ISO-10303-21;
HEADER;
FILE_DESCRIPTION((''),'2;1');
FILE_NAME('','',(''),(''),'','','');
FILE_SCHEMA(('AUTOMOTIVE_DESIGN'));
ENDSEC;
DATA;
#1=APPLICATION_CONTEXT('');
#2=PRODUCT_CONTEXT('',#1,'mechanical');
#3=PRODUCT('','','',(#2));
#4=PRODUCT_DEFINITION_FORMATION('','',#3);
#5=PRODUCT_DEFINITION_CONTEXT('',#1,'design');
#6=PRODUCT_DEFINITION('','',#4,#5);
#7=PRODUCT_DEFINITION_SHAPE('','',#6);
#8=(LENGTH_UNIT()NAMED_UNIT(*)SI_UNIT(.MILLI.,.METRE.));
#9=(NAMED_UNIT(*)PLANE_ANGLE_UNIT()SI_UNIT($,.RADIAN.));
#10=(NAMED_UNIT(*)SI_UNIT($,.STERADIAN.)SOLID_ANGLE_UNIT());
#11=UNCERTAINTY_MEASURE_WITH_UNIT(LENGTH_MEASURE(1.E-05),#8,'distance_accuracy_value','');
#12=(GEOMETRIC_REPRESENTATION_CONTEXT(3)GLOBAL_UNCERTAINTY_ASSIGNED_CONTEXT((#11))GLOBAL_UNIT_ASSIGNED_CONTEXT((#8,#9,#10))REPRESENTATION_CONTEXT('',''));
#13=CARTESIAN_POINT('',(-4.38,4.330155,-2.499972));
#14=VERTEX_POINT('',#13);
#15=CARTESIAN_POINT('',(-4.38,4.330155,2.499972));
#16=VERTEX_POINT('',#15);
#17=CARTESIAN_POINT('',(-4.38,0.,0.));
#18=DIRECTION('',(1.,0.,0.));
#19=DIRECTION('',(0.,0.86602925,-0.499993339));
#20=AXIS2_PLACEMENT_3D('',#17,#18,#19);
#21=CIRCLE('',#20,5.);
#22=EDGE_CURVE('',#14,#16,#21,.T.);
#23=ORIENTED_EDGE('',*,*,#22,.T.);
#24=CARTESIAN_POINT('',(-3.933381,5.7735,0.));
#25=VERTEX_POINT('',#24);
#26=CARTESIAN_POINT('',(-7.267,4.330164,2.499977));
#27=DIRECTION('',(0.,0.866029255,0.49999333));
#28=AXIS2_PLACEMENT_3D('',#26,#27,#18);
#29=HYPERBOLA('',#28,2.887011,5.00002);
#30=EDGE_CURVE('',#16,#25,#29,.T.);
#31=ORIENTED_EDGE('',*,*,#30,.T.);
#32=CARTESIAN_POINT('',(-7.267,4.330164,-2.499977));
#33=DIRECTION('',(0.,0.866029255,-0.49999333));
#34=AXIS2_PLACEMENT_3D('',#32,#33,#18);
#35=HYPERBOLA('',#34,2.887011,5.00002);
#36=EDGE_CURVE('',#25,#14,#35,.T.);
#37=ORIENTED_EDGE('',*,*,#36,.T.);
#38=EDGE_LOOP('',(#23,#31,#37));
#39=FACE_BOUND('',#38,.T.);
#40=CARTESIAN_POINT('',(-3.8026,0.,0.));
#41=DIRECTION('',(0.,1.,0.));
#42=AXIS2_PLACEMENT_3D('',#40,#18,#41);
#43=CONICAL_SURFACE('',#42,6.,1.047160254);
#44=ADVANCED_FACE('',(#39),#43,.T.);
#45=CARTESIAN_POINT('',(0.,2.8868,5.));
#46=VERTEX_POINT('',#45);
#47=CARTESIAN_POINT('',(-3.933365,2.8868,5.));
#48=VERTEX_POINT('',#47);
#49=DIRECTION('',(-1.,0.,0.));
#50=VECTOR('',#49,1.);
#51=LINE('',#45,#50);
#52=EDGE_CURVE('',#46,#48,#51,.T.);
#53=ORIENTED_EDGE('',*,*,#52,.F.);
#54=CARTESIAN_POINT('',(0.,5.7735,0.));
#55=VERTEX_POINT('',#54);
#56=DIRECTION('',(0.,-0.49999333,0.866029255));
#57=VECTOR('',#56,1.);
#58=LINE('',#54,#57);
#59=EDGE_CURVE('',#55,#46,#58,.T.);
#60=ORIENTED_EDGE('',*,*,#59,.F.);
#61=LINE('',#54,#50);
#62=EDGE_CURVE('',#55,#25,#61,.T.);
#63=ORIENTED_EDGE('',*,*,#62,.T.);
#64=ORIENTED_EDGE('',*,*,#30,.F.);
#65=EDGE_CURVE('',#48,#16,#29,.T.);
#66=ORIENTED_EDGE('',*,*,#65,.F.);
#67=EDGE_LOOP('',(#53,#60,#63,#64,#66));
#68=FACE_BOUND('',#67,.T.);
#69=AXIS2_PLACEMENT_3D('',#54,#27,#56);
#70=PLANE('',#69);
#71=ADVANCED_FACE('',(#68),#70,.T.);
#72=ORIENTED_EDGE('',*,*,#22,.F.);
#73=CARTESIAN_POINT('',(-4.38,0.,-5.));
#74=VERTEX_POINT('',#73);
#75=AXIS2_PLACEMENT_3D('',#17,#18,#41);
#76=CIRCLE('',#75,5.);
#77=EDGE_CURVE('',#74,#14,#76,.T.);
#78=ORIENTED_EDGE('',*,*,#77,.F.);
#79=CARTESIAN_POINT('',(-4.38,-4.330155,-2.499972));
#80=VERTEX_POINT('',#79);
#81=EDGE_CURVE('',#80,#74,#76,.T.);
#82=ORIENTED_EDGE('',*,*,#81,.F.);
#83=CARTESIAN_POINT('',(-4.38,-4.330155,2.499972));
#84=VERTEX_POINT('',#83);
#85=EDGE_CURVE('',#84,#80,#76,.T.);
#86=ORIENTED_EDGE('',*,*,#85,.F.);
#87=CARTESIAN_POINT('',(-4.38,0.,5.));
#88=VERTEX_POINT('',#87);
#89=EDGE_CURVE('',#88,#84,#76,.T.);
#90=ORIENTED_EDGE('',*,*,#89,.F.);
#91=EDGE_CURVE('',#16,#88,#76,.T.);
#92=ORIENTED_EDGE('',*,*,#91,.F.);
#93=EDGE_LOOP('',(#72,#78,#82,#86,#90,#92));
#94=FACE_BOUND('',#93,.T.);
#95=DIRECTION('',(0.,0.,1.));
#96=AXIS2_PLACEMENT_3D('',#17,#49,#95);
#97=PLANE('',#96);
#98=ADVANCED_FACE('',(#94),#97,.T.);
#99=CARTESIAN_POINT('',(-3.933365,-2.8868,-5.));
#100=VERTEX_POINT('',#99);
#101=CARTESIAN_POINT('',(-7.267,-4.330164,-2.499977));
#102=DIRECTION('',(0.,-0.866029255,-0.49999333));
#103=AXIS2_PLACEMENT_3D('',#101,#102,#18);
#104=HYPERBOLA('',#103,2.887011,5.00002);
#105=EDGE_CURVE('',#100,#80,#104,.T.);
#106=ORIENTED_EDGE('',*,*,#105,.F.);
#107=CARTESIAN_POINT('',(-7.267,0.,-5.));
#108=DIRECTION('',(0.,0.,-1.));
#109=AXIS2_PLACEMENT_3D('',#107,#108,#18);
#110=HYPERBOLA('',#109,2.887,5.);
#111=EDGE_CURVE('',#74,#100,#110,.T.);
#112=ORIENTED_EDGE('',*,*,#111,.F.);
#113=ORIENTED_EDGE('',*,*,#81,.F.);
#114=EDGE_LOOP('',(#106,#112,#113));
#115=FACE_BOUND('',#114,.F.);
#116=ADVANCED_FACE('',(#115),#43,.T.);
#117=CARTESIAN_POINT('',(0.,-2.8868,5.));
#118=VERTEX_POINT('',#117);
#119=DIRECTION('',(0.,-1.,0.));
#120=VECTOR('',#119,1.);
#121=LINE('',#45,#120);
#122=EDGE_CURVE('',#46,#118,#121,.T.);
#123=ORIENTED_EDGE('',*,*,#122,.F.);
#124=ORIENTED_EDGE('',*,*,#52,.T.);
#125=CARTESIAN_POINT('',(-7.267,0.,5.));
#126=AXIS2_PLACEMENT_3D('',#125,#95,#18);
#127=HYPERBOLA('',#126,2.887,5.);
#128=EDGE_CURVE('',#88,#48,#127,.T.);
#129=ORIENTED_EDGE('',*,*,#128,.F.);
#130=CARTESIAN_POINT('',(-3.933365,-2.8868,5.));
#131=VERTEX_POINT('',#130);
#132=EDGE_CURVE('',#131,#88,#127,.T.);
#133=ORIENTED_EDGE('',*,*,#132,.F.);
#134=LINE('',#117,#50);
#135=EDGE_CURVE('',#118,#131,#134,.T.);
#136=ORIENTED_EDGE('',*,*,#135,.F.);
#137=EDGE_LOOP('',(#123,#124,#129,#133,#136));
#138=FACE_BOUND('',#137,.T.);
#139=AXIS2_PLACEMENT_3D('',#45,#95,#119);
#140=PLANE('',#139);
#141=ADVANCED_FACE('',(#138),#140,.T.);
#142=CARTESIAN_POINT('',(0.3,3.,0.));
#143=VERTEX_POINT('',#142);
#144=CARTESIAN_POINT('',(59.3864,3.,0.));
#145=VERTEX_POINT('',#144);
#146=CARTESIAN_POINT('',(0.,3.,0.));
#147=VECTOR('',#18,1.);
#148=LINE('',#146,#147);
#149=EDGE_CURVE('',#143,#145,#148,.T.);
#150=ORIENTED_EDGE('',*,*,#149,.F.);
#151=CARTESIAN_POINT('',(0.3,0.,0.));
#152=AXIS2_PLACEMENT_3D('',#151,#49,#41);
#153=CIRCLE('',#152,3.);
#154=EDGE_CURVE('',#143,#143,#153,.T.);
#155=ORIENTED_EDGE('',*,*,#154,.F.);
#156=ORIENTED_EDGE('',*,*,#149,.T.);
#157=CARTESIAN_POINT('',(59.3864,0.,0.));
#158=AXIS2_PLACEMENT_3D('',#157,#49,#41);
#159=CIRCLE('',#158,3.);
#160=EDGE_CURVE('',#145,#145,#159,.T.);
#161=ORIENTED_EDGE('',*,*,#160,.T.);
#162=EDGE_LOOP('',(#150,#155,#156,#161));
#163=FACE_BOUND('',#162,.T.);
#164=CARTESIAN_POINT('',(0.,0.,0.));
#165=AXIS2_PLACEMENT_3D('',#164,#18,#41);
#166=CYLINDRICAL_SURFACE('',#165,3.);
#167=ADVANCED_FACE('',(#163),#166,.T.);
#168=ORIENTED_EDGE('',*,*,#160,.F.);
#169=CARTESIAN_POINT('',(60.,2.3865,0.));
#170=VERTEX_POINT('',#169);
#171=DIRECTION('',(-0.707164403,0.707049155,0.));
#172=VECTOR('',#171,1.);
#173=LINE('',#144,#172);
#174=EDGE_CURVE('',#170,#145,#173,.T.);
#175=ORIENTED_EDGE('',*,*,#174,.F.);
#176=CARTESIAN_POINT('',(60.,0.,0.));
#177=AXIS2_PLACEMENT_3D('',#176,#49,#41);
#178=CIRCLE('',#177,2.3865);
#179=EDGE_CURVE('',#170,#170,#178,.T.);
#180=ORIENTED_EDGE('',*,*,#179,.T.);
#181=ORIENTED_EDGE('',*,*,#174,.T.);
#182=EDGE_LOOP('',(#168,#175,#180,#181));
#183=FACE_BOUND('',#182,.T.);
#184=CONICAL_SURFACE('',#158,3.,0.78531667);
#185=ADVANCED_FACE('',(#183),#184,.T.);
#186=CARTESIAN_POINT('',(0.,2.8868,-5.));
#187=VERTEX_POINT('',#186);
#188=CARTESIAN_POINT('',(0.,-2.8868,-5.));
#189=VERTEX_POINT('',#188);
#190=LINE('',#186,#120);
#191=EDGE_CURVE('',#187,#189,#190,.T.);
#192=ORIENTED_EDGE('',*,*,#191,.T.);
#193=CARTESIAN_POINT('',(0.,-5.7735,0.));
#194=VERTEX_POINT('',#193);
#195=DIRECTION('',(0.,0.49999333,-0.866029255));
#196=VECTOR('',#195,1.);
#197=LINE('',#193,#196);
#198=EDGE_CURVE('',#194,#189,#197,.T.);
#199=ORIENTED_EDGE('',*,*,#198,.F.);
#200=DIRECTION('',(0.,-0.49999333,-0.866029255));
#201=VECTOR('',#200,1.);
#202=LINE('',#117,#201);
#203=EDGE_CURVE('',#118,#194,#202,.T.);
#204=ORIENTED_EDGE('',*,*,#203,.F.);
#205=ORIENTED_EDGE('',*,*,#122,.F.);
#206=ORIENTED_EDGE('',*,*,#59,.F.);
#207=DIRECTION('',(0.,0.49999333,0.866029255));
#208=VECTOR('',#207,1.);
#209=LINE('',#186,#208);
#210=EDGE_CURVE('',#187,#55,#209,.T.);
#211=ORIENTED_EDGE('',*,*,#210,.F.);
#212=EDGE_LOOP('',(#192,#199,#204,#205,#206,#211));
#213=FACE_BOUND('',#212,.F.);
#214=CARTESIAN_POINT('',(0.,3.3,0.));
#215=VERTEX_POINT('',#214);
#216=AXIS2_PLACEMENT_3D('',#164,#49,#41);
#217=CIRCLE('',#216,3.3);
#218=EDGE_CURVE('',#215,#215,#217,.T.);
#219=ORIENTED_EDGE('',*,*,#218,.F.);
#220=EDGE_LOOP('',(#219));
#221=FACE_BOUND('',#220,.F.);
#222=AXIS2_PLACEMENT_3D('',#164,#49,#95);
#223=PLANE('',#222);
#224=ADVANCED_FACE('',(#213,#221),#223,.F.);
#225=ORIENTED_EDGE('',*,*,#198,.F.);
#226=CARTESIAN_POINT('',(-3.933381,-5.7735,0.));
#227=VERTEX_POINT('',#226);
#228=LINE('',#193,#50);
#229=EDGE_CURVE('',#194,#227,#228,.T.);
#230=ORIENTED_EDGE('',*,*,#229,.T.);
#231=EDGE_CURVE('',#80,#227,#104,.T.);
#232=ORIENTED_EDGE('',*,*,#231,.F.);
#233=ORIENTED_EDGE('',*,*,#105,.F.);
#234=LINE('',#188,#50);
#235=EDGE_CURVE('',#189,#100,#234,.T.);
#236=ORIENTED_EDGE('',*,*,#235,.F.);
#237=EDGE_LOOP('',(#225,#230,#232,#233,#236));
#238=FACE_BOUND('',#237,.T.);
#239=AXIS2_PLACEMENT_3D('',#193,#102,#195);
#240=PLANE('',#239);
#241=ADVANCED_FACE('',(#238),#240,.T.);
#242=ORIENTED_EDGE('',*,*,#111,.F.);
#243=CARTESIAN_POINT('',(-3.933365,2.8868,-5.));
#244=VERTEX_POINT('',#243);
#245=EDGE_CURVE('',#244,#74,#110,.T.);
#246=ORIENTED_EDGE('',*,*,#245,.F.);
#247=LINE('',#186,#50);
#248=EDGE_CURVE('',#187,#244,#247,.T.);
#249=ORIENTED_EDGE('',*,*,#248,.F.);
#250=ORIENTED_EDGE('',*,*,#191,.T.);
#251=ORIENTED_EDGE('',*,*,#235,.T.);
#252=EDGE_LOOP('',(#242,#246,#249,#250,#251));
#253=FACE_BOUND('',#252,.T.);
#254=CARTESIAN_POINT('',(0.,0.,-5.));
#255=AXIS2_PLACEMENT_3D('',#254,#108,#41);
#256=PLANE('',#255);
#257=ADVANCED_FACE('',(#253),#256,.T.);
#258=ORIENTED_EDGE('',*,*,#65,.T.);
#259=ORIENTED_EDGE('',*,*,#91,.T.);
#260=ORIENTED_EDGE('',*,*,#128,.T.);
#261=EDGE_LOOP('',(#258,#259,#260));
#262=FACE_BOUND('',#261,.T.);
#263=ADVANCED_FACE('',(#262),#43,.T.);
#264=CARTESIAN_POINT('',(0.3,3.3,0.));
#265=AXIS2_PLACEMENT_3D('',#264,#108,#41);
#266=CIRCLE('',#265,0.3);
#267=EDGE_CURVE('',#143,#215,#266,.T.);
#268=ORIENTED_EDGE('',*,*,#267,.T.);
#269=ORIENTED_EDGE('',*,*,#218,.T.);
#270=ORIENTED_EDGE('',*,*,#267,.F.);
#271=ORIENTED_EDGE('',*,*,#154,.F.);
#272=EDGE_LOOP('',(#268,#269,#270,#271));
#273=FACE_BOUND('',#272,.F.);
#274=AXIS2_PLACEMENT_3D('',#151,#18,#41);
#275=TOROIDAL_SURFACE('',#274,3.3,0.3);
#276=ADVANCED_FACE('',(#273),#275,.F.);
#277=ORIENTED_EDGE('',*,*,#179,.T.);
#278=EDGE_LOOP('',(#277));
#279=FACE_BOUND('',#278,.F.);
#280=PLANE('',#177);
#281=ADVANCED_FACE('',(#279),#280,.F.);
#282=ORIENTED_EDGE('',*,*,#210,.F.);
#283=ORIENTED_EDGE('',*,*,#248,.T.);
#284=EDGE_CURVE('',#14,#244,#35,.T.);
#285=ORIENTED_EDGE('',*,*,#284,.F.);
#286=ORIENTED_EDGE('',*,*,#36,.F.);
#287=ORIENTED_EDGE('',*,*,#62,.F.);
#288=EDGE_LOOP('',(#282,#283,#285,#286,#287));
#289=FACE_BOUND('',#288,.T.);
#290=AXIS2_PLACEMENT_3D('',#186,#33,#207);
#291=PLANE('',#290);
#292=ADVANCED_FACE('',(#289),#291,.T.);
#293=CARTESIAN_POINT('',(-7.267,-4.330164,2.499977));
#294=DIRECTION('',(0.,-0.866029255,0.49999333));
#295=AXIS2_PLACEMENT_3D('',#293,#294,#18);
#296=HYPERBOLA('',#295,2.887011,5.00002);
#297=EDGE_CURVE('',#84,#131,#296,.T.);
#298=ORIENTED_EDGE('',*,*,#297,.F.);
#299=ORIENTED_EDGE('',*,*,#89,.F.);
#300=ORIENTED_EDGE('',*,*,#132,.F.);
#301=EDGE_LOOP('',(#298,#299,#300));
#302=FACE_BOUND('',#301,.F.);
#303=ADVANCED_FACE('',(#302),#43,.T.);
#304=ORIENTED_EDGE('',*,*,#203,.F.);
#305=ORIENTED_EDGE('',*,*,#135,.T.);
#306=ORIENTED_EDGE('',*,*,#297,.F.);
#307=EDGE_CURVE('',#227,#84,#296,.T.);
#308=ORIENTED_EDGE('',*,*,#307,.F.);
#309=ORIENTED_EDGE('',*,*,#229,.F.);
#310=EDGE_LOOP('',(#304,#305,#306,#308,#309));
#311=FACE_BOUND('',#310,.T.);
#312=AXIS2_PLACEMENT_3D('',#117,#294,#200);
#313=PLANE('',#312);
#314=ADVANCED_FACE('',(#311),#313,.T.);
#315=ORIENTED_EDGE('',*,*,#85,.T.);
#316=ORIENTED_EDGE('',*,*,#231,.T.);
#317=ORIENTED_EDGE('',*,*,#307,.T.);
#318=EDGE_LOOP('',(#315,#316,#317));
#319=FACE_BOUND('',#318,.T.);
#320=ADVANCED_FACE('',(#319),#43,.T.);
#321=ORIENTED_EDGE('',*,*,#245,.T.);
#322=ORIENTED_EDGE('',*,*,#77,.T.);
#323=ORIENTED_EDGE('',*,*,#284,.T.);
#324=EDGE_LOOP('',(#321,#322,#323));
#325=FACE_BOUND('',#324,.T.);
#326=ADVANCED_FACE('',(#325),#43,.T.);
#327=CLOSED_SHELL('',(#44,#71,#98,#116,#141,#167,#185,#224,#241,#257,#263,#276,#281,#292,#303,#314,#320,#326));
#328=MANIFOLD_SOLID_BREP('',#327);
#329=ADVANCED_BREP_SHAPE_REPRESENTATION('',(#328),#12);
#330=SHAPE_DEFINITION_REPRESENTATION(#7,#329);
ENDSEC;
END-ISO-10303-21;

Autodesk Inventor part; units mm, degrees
ref_plane "YZ Plane" through (0, 0, 0) normal (1, 0, 0) x (0, 1, 0)
ref_plane "XZ Plane" through (0, 0, 0) normal (0, 1, 0) x (-1, 0, 0)
sketch "Szkic1" plane through (0, 0, 0) normal (0, 0, 1) x (1, 0, 0)
  line L0 (0, 3) -> (60, 3)
  line L1 (60, 3) -> (60, 0)
  line L2 (60, 0) -> (0, 0)
  line L3 (-12, 0) -> (72, 0) projected
  line L4 (0, -0.6) -> (0, 3.6) projected
  line L5 (0, 3) -> (0, 0)
  dimension "d2" = 6
  dimension "d59" = 60
revolve "Bryła" add sketch "Szkic1" angle 360 about axis through (60, 0, 0) along (-1, 0, 0)
sketch "Szkic2" plane through (0, 0, 0) normal (-1, 0, 0) x (0, 0, 1)
  line L0 (0, 5.7735) -> (5, 2.8868)
  line L1 (5, 2.8868) -> (5, -2.8868)
  line L2 (5, -2.8868) -> (0, -5.7735)
  line L3 (0, -5.7735) -> (-5, -2.8868)
  line L4 (-5, -2.8868) -> (-5, 2.8868)
  line L5 (-5, 2.8868) -> (0, 5.7735)
  line L6 (-7, 0) -> (7, 0) projected
  line L7 (0, 8.0829) -> (0, -8.0829) projected
  point P0 (0, 0)
  point P1 (0, 0)
  dimension "d11" = 10
extrude "Głowica" add sketch "Szkic2" along normal blind 4.38
sketch "Szkic4" plane through (0, 0, 0) normal (0, 0, 1) x (1, 0, 0)
  line L0 (-3.8026, 6) -> (-4.38, 5)
  line L1 (-1.1, 0) -> (-0.234, 0)
  line L2 (-5.2092, 0) -> (0.5952, 0) projected
  line L3 (-4.38, 6) -> (-3.8026, 6)
  line L4 (-4.38, 5) -> (-4.38, 6)
  line L5 (0, 7.2) -> (0, -1.2) projected
  dimension "d65" = 10
  dimension "d67" = 30
  dimension "d68" = 12
  dimension "d69" = 4.38
revolve "Faza1" cut sketch "Szkic4" angle 360 about axis through (-1.1, 0, 0) along (1, 0, 0)
thread "Gwint" size "M6x1" class "6g" standard "ISO Metric profile" length 18
chamfer "Faza2" distance 0.6135 distance2 0.6136 1 edges at (60, -3, 0) measured on face at (60, 0.0929, 0.8807)
fillet "Fillet" radius 0.3 1 edges at (0, -3, 0)
ref_plane "Work Plane1" through (1.525, 0, 0) normal (0, 0, 1) x (1, 0, 0)
equation "\"d71\" = RR1"
equation "\"d11\" = SW"
equation "\"d3\" = KOH"
equation "\"d15\" = GEL"
equation "\"d6\" = -0.5 * SPD + 0.5 * GD"
equation "\"d2\" = GD"
equation "\"d59\" = NLG"
equation "\"d65\" = SW"
equation "\"d67\" = ANG1"
equation "\"d68\" = 1.2 * SW"
equation "\"d69\" = KOH"
equation "\"NLG\" = 60"
equation "\"GD\" = NND"
equation "\"BDM\" = NND"
equation "\"KOH\" = 4.38"
equation "\"GEL\" = 18"
equation "\"SW\" = 10"
equation "\"SPD\" = NND - 1.2269 * PTC"
equation "\"SD2\" = NND"
equation "\"SD\" = 0"
equation "\"ANG1\" = 30deg"
equation "\"GAL\" = 0.61345 * PTC"
equation "\"GUL\" = 0.61345 * PTC"
equation "\"RR\" = 0.1"
equation "\"RR1\" = 0.3"
equation "\"GD1\" = THREADDIA - 1.2269 * PTC"
equation "\"THREADDIA\" = 6"
equation "\"TOA\" = 30deg"
equation "\"PTC\" = 1"
equation "\"KOH1\" = 2.8"
equation "\"NND\" = 6"
equation "\"E0\" = 1.155 * SW"
properties part number "ANSI B18.2.3.5M - M6 x 1 x 60" material "Stal, miękka"
